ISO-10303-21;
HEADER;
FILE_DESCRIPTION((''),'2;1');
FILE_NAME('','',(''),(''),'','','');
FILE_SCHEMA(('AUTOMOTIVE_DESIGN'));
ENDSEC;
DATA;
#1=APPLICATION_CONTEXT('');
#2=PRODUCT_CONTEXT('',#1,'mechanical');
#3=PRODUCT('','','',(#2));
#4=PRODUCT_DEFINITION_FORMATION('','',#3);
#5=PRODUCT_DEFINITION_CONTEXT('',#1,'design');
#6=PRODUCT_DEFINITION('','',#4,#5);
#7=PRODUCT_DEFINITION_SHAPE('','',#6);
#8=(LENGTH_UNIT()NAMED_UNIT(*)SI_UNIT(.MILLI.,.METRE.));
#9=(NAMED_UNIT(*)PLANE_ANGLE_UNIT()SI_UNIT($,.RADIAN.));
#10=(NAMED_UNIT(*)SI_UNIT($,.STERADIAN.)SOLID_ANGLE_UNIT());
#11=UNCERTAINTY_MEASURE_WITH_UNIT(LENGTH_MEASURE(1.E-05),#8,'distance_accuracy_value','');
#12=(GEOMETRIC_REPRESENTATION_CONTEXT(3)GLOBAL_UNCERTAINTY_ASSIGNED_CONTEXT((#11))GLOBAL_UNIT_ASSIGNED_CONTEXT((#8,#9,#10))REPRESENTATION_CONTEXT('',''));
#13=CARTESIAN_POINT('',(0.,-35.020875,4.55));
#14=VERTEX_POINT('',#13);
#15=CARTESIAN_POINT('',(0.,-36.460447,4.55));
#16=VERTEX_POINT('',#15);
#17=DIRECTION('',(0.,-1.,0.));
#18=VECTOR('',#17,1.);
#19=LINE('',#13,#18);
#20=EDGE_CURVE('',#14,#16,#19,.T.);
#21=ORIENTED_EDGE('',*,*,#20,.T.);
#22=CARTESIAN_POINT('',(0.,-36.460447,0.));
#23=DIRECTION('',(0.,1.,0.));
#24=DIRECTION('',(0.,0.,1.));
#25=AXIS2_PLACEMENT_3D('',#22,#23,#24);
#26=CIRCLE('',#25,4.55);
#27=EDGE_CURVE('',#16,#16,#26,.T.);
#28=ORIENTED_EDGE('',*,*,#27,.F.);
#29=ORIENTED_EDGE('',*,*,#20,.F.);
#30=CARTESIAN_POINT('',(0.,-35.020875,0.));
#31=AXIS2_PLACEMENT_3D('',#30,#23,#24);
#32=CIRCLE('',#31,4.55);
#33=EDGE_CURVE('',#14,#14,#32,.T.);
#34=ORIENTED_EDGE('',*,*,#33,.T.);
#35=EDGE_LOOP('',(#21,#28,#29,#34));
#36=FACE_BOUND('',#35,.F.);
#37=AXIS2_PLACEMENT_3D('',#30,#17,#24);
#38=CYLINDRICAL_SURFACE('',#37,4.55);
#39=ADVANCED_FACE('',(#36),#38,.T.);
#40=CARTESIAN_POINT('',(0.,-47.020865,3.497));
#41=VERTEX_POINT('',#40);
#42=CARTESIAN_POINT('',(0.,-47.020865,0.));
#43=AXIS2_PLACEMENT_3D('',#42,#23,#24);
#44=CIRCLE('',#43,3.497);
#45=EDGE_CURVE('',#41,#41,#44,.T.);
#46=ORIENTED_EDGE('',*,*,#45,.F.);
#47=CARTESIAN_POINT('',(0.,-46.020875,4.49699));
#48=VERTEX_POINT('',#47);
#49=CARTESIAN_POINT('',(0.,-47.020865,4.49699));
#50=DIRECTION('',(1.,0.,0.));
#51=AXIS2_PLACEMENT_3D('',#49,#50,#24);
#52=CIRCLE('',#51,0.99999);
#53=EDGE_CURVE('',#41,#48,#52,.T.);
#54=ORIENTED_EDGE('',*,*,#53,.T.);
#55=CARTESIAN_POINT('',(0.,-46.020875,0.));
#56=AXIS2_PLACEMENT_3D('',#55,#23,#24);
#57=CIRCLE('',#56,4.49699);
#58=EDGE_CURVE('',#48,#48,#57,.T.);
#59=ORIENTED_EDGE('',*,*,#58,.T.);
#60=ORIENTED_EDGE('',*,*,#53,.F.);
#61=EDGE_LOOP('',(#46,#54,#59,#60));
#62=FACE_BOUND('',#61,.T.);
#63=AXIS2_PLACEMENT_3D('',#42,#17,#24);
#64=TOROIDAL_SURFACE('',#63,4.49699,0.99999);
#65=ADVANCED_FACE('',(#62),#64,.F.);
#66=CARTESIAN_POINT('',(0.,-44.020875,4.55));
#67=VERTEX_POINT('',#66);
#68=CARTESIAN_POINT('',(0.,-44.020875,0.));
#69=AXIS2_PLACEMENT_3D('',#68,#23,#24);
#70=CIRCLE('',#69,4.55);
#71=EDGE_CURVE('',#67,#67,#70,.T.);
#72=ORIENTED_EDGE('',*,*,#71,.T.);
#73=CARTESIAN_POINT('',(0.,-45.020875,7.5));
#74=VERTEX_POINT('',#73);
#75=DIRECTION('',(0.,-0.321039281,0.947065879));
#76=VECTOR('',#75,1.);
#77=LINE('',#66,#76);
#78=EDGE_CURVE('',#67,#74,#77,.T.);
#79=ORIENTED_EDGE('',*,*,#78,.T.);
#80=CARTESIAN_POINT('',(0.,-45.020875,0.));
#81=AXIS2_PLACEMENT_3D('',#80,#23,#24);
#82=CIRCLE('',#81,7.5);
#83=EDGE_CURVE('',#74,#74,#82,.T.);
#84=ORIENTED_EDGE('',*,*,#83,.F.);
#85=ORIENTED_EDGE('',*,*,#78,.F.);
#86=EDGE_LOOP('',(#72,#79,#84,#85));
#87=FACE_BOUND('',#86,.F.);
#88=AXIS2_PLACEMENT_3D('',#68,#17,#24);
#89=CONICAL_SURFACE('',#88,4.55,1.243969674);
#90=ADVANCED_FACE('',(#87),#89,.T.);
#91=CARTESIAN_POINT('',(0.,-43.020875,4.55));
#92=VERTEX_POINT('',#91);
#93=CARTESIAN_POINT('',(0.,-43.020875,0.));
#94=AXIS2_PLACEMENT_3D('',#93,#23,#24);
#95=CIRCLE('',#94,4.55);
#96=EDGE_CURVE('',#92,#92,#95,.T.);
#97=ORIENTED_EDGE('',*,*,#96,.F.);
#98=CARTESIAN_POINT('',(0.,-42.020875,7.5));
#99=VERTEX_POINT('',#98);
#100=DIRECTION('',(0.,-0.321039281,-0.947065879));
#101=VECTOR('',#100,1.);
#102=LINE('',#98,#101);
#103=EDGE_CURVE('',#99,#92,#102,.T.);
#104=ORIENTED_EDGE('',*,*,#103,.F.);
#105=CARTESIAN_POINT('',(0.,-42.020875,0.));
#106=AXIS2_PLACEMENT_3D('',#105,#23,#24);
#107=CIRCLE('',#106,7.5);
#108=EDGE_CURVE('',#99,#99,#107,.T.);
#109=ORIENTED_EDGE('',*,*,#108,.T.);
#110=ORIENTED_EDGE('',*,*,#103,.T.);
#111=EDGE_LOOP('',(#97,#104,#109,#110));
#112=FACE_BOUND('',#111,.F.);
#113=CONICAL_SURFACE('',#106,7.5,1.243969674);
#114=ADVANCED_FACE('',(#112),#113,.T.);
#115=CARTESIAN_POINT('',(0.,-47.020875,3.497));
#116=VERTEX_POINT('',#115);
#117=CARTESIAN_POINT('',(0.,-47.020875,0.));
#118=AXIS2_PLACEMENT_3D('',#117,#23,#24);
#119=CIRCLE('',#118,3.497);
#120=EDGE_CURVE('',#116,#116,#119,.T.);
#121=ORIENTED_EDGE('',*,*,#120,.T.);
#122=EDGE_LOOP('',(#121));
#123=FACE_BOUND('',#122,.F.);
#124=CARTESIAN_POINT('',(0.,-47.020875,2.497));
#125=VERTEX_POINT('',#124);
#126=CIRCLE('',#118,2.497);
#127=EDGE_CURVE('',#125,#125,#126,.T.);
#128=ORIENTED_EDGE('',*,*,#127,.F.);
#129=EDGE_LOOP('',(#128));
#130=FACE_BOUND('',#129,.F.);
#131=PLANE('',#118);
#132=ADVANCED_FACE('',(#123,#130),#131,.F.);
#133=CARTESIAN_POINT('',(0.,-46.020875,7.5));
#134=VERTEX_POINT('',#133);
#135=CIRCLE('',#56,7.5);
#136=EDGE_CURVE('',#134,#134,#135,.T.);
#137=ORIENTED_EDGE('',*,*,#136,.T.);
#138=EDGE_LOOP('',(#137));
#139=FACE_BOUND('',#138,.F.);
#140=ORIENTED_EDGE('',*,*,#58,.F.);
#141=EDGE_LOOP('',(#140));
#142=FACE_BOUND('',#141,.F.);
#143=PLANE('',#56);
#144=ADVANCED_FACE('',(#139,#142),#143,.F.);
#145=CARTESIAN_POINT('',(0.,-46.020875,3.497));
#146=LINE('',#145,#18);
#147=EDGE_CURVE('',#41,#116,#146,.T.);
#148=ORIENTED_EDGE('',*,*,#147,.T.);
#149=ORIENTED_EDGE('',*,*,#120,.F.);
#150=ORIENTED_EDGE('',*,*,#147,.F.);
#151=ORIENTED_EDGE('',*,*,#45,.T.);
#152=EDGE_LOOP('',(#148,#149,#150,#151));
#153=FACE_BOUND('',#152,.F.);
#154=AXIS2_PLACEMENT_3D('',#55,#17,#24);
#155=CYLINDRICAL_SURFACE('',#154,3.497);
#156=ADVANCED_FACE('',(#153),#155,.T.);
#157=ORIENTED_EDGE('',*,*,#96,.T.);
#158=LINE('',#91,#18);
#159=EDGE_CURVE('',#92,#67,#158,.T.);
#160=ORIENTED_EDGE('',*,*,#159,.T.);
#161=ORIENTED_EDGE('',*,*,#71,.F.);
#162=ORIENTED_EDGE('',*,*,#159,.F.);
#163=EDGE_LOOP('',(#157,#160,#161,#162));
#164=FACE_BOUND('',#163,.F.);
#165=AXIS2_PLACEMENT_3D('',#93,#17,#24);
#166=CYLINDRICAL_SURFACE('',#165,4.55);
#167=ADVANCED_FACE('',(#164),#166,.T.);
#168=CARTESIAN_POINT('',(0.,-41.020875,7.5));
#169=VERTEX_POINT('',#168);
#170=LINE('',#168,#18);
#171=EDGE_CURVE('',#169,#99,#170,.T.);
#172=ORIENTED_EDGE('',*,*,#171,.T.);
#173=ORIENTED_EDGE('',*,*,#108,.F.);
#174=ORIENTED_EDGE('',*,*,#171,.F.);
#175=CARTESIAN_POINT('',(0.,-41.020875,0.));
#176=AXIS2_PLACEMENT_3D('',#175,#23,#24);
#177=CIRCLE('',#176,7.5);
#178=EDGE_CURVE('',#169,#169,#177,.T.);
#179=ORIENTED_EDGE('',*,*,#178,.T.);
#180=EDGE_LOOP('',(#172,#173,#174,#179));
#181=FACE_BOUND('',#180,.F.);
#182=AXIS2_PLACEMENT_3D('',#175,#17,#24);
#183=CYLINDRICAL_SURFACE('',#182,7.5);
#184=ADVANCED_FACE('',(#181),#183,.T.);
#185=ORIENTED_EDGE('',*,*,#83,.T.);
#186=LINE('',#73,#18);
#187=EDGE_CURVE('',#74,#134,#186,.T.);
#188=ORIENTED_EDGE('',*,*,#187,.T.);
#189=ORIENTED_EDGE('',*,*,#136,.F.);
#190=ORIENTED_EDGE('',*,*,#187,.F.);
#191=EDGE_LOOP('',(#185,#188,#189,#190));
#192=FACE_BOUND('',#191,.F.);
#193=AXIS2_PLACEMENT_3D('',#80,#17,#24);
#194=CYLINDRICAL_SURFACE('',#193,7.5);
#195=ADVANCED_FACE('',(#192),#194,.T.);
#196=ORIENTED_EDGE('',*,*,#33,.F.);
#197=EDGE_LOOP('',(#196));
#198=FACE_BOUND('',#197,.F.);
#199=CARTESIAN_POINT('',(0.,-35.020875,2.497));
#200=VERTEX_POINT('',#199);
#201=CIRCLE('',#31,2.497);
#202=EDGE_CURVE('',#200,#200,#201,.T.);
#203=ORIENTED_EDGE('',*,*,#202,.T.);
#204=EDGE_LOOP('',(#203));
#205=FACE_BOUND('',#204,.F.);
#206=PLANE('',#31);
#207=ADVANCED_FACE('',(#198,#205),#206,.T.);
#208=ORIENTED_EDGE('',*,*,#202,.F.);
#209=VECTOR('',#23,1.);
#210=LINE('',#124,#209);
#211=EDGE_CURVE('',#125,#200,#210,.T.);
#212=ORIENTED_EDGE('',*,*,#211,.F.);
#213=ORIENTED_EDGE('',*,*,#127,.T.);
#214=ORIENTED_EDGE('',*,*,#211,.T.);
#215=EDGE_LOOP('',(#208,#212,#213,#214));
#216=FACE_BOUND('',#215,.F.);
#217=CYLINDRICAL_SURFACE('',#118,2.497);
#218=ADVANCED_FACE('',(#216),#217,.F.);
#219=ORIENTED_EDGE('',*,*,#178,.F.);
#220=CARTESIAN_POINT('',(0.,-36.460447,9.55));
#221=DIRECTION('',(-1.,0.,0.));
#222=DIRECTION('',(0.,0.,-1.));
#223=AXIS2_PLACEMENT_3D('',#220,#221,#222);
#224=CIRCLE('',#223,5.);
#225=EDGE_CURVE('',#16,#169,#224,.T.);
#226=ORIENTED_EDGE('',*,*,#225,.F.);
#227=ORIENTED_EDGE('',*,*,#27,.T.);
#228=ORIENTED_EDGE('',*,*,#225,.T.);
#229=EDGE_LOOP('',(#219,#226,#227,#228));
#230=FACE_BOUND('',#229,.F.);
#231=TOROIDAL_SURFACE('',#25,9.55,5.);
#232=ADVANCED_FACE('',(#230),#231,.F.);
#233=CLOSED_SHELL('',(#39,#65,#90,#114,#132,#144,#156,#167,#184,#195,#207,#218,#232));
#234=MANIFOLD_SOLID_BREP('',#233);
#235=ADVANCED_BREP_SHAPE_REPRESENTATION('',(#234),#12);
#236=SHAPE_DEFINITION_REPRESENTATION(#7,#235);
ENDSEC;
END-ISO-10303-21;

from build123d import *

# Parameters (mm, degrees)
F3_R = 0.99999


# Not quite as in the source:
# - a fillet or chamfer that OpenCascade refuses, or shapes differently, is made with other operations: its cross-section is extruded or revolved along the edge and cut away or added
# - a fillet or chamfer is up to 0.001 mm smaller than in the source, because OpenCascade refuses the exact size


with BuildPart() as f1:
    # F0 (on Right) → F1 (revolve)
    with BuildSketch(Plane.YZ):
        Polygon((-47.0208749175, 2.497), (-35.0208749175, 2.497), (-35.0208749175, 4.55), (-41.0208749175, 4.55), (-41.0208749175, 7.5), (-42.0208749175, 7.5), (-43.0208749175, 4.55), (-43.5208749175, 4.55), (-44.0208749175, 4.55), (-45.0208749175, 7.5), (-46.0208749175, 7.5), (-46.0208749175, 4.55), (-46.0208749175, 3.497), (-47.0208749175, 3.497), align=None)
    revolve(axis=Axis((0, -14.7727020085, 0), (0, 1, 0)))

    # F2: fillet of radius 5 on 1 edges, made by hand

    # F2_s1 → F2_t2 (revolve)
    with BuildSketch(Plane.YZ):
        with BuildLine():
            ThreePointArc((-36.460447306, 4.55), (-39.1761424288, 5.3517860941), (-41.0208749175, 7.5))
            Line((-41.0208749175, 7.5), (-41.1120834697, 7.459))
            ThreePointArc((-41.1120834697, 7.459), (-41.1208749175, 6.025), (-41.1208749175, 4.55))
            Line((-41.1208749175, 4.55), (-41.0208749175, 4.45))
            Line((-41.0208749175, 4.45), (-36.460447306, 4.45))
            Line((-36.460447306, 4.45), (-36.460447306, 4.55))
        make_face()
    revolve(axis=Axis((0, -41.0208749175, 0), (0, 1, 0)))

    # F3 (radius 1 in the source; OpenCascade refuses exactly that, so slightly less here)
    f3_edges = [f1.edges().sort_by_distance(p)[0] for p in [
        (0, -46.020875, -3.497),
    ]]
    fillet(f3_edges, radius=F3_R)


solid = f1.part
